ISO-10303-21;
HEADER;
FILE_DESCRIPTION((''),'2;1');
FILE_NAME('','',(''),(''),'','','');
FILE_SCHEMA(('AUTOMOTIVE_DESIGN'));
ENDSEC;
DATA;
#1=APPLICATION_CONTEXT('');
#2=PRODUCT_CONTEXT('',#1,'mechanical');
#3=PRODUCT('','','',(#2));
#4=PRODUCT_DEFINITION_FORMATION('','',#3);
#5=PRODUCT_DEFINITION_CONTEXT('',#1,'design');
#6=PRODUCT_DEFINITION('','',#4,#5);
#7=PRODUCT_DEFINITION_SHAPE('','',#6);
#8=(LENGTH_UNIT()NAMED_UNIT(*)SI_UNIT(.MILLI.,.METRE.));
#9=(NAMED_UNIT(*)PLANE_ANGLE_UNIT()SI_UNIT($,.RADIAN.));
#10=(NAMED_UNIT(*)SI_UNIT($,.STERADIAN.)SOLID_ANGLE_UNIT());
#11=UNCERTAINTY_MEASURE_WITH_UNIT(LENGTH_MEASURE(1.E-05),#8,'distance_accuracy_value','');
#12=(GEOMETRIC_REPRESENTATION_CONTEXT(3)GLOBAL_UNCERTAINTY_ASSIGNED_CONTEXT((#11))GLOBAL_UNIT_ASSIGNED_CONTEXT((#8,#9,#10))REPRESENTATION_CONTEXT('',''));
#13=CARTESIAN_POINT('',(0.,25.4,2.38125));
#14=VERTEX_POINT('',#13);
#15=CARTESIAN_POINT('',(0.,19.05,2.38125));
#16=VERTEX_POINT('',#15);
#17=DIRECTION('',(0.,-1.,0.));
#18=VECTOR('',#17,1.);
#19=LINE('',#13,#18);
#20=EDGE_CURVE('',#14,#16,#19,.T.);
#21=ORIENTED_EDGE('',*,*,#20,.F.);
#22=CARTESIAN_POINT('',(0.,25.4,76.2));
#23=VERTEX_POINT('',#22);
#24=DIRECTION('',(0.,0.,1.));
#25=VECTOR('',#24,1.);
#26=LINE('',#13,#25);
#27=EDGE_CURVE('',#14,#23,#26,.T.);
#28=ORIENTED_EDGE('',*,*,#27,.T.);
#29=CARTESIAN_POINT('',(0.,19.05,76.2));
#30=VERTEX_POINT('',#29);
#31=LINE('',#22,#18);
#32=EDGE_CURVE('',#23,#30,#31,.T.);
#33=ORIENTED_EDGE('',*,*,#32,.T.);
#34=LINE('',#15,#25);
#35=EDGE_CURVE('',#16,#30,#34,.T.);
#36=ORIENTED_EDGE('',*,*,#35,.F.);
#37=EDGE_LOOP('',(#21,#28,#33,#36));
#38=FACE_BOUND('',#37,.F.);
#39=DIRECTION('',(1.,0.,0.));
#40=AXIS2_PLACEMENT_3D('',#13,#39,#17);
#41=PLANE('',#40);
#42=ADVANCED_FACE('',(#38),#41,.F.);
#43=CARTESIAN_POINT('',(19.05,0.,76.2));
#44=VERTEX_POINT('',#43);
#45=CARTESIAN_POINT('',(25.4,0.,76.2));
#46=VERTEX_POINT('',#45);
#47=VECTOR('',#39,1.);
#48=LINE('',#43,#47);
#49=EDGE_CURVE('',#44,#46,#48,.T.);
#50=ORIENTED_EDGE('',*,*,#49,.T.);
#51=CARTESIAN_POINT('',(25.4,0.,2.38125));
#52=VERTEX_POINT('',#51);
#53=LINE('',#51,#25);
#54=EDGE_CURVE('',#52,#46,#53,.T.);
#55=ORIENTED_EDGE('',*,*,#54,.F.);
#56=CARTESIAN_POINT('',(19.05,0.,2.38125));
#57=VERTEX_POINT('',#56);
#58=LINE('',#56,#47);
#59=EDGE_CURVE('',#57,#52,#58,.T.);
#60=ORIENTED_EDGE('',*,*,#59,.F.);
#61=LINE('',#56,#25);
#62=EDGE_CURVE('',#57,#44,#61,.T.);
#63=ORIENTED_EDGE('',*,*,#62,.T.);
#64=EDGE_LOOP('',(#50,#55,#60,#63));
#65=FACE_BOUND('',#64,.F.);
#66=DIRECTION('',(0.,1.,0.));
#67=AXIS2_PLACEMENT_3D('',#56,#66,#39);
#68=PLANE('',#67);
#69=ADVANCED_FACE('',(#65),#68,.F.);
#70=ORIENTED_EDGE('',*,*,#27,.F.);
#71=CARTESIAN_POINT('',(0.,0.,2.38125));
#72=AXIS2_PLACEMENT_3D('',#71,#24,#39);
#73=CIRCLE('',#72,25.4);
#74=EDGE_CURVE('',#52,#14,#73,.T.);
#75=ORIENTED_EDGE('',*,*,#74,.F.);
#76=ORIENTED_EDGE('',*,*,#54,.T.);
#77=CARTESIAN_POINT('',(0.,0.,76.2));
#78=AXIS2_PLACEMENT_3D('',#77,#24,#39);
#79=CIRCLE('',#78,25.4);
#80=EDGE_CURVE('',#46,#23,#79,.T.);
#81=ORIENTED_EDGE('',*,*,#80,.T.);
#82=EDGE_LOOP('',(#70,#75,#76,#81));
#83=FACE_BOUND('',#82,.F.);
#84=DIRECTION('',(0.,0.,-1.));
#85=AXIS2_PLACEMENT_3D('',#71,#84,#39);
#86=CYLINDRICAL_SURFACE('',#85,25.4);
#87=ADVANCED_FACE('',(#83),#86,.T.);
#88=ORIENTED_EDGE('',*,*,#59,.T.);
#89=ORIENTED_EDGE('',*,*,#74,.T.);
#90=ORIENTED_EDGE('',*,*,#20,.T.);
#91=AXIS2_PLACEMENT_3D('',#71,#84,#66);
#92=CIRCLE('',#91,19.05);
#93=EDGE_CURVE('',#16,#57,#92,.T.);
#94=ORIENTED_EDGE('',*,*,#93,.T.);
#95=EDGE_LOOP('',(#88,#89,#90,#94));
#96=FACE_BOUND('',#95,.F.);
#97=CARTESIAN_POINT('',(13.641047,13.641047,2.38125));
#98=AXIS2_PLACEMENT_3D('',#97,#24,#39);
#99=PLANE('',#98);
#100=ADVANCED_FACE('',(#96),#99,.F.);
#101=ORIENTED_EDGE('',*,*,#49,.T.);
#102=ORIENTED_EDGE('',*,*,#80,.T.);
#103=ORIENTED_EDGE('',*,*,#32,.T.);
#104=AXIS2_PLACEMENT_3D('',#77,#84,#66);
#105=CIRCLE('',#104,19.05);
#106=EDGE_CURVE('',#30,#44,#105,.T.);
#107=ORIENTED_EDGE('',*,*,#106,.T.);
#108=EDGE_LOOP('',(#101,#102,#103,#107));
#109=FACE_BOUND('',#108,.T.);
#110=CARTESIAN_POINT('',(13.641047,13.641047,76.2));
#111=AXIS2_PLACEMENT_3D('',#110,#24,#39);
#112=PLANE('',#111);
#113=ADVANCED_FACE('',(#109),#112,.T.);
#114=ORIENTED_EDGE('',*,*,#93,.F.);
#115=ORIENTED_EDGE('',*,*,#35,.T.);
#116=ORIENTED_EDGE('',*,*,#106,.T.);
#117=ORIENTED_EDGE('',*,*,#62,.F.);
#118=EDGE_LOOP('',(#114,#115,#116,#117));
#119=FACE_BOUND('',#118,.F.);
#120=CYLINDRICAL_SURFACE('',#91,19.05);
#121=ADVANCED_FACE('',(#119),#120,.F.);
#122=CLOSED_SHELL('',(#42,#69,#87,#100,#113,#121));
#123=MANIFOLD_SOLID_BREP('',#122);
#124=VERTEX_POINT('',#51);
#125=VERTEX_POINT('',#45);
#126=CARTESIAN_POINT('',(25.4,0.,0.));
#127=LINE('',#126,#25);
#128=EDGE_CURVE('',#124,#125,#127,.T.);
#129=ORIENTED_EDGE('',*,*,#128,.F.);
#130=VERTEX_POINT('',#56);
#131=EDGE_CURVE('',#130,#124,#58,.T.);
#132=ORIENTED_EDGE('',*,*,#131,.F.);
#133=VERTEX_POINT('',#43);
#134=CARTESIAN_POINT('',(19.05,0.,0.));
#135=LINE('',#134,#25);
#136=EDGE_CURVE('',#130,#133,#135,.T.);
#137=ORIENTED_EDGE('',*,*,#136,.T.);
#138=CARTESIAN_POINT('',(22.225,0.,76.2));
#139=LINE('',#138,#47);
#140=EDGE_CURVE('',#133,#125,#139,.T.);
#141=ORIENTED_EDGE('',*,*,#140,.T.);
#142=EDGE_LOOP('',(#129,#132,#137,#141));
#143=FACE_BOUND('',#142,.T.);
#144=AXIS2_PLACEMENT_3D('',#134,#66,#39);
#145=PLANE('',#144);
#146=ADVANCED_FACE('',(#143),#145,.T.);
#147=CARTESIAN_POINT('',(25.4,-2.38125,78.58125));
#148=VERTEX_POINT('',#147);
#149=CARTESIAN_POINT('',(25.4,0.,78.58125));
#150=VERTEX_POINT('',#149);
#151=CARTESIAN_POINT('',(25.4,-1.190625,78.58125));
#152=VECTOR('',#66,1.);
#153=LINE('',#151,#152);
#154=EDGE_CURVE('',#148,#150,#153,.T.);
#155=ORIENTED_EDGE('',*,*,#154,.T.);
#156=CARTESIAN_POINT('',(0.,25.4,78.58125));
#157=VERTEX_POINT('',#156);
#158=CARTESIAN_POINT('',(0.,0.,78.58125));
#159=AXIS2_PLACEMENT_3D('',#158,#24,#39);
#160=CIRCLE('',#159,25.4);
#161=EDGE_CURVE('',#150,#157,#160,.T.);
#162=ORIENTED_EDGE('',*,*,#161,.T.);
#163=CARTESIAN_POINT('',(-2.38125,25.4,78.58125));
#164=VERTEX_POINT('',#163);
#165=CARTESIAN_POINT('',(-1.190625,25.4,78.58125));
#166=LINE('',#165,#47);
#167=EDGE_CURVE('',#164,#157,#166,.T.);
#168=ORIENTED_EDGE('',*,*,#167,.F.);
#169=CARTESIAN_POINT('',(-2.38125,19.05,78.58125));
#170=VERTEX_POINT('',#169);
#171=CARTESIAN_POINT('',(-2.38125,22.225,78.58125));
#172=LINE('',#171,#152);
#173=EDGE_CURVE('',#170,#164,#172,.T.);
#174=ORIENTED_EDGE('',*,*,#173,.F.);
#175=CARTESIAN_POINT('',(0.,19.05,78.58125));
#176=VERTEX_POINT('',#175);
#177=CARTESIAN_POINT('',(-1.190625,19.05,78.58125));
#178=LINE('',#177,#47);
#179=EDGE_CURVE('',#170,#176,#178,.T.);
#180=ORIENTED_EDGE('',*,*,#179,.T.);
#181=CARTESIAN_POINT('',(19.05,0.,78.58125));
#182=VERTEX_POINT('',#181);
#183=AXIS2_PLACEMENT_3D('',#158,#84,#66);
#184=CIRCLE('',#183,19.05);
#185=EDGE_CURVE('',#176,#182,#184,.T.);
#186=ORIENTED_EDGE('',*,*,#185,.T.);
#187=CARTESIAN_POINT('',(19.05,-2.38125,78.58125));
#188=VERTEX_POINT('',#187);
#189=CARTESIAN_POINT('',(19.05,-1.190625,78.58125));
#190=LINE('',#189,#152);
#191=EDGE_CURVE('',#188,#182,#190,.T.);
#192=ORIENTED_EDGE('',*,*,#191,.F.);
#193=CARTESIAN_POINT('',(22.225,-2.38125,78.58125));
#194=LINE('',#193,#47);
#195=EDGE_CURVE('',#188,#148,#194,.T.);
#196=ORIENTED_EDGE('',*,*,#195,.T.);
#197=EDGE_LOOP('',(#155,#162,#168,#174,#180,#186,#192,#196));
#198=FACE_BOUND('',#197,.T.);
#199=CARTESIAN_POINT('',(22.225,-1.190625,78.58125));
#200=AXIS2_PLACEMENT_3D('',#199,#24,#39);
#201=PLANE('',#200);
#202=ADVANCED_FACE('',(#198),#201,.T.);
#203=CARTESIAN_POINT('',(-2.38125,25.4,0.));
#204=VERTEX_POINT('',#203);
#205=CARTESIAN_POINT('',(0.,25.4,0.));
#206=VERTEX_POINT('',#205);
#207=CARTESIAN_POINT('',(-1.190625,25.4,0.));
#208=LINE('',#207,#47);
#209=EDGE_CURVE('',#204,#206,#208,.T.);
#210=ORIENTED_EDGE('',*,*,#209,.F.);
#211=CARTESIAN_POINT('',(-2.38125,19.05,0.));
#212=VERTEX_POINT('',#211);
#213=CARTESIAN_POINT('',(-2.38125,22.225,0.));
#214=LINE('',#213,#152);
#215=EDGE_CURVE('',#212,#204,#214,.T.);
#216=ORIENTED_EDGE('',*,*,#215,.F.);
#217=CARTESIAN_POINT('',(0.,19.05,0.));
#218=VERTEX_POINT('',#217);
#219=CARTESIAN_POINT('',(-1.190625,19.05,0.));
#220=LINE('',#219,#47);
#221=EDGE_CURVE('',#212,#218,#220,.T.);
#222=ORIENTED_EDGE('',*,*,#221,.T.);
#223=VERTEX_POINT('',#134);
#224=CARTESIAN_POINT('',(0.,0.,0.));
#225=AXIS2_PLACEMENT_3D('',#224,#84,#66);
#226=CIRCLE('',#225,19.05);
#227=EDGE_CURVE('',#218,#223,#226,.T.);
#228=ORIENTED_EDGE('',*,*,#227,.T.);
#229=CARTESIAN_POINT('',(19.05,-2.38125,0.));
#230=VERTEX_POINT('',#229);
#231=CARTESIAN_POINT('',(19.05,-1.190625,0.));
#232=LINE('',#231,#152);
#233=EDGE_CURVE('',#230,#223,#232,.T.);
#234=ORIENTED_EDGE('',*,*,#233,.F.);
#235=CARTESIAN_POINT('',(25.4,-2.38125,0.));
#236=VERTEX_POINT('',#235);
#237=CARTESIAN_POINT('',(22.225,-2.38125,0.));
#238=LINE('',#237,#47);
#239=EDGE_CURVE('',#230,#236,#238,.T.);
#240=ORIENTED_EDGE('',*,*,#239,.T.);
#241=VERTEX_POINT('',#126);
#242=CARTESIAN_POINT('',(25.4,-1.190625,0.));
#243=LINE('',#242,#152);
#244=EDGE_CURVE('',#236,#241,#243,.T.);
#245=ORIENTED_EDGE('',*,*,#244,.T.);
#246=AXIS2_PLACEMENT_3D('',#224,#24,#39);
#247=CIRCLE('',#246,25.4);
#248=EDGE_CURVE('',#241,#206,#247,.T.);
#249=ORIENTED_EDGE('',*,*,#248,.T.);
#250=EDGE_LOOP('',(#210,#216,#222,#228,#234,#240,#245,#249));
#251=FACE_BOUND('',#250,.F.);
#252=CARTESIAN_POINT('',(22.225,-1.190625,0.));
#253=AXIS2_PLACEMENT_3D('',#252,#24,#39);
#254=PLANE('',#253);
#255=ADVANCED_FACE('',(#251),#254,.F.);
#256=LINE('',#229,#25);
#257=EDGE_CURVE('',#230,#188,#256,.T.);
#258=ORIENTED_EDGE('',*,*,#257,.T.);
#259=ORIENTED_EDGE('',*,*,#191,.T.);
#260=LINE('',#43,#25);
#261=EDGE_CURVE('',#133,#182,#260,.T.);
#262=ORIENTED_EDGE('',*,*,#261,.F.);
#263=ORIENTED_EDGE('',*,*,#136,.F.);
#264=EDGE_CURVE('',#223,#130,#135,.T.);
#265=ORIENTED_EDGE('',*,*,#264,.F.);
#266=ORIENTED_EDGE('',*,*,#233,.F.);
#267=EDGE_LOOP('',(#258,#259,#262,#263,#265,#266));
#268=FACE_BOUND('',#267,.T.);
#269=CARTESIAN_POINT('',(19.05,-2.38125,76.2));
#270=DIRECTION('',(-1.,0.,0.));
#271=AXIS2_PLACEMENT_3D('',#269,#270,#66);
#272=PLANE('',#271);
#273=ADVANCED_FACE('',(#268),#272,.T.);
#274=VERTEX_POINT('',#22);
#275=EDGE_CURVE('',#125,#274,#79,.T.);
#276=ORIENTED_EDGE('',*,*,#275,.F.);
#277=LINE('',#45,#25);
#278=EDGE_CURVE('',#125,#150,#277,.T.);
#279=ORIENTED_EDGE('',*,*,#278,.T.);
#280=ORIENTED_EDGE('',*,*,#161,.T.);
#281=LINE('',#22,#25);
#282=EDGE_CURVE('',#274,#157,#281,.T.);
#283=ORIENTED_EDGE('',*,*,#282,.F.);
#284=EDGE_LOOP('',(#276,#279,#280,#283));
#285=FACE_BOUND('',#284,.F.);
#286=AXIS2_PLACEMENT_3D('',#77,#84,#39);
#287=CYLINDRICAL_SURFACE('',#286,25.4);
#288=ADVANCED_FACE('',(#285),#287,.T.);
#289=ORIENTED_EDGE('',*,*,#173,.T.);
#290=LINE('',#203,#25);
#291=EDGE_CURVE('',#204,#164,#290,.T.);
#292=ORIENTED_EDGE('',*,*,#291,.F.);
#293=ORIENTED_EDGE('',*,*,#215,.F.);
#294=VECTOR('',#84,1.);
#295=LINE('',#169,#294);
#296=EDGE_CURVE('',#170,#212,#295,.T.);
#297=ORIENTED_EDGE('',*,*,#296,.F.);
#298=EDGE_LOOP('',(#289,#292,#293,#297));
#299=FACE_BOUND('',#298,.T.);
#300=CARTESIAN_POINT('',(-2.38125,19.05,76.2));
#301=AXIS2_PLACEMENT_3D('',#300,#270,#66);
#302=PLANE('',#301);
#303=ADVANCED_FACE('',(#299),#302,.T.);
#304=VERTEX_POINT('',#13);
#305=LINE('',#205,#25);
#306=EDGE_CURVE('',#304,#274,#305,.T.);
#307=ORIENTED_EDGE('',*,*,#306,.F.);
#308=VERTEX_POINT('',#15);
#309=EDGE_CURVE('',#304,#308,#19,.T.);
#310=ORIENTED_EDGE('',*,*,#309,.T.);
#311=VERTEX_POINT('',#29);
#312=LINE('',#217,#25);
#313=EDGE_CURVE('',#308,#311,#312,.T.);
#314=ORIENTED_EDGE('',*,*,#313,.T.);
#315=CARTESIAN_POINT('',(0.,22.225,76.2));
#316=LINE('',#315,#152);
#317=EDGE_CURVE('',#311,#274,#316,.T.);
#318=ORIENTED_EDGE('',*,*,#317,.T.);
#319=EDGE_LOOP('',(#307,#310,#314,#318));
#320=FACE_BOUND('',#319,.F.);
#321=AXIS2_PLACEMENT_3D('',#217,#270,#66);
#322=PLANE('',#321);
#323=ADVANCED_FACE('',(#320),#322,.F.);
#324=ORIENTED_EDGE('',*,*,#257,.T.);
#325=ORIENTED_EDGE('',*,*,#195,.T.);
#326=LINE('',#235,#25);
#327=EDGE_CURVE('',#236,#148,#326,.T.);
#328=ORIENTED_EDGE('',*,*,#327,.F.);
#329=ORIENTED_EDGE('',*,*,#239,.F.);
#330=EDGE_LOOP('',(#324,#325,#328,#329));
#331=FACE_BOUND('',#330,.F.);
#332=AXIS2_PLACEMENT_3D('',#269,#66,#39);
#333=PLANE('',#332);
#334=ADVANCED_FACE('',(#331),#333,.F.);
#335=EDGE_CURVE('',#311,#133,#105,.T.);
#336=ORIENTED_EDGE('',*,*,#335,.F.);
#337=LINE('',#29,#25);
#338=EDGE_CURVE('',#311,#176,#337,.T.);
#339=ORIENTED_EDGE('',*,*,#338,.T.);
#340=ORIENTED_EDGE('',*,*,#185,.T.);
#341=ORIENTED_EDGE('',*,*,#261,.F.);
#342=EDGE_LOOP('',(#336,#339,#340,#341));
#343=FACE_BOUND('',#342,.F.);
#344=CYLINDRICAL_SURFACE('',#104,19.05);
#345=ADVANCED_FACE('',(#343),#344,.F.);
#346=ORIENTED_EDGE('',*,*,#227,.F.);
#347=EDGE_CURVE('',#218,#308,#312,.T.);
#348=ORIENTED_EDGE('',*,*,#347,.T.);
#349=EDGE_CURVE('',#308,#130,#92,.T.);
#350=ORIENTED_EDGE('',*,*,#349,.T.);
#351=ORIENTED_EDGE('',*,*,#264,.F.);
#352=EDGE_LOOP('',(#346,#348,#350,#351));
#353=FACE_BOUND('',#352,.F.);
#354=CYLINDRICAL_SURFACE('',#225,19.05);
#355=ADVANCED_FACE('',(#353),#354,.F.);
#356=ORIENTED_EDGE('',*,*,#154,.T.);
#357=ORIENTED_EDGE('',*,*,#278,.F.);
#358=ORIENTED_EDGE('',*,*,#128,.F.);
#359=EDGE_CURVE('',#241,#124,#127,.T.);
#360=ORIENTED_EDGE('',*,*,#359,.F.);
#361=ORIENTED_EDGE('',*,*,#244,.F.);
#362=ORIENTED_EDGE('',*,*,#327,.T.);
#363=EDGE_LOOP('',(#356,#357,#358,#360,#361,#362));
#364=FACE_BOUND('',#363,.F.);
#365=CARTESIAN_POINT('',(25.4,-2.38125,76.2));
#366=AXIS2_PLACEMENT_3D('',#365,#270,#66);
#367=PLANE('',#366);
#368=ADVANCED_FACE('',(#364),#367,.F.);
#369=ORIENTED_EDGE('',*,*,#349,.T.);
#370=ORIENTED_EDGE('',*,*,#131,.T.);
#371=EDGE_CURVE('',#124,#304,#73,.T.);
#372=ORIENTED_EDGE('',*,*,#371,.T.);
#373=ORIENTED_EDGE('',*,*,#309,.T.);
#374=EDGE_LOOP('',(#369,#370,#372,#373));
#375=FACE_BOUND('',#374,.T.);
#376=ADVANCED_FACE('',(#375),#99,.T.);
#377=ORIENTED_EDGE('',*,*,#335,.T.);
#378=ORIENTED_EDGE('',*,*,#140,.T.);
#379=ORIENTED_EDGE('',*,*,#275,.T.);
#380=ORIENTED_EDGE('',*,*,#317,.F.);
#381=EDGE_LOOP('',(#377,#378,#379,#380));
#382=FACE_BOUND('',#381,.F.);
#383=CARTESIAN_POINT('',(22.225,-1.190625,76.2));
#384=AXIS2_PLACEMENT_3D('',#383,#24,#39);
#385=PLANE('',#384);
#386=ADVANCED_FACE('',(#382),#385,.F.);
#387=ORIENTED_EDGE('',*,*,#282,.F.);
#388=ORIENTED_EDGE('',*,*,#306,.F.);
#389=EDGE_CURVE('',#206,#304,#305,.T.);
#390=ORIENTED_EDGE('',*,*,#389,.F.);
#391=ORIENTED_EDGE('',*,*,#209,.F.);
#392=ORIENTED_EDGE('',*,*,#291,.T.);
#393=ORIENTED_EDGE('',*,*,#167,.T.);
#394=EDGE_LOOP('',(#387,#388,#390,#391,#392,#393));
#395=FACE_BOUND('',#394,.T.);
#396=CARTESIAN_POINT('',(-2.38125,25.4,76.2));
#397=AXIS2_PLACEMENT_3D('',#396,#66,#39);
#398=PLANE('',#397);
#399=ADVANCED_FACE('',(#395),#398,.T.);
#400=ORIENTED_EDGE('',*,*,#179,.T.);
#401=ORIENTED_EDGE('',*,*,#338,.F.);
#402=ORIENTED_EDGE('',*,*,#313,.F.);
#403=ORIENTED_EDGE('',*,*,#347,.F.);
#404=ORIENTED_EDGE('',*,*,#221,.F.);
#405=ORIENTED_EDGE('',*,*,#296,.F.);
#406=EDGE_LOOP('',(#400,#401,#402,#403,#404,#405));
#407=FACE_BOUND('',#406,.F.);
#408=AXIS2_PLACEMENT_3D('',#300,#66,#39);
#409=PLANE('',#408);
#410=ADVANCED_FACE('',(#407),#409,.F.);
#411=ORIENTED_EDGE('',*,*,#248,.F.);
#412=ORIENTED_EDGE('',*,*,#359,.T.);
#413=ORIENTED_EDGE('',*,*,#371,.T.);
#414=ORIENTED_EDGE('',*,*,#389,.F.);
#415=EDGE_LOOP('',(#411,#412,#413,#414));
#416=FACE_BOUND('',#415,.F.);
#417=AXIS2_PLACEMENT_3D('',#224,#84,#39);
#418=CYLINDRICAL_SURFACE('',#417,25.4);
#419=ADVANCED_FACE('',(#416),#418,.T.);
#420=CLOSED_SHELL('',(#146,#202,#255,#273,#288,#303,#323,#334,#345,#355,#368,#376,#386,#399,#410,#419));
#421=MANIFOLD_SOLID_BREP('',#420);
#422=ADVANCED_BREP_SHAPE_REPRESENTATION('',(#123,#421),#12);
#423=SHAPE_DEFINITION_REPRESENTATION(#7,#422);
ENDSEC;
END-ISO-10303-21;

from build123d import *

# Parameters (mm, degrees)
F1_DEPTH = 2.38125
F0_W     = 6.35
F0_H     = 2.38125
F0_W_2   = 2.38125
F0_H_2   = 6.35
F2_DEPTH = 76.2
F3_W     = 6.35
F3_H     = 2.38125
F3_W_2   = 2.38125
F3_H_2   = 6.35
F4_DEPTH = 2.38125
F5_DEPTH = 73.81875


# Not quite as in the source:
# - a length typed as a fraction of an inch, garbled in the dataset ("3 / 203.2 mm" for 3/8 in), is restored
# - a feature names something its author has since deleted; it is built from what else it names


with BuildPart() as f1:
    # F0 (on Top) → F1 (new body)
    with BuildSketch(Plane.XY):
        with BuildLine():
            ThreePointArc((0, 19.05), (13.4703841816, 13.4703841816), (19.05, 0))
            Line((19.05, 0), (25.4, 0))
            ThreePointArc((25.4, 0), (17.9605122421, 17.9605122421), (0, 25.4))
            Line((0, 25.4), (0, 19.05))
        make_face()
    extrude(amount=F1_DEPTH)

    # F0 (on Top) → F2 (join)
    with BuildSketch(Plane.XY):
        with Locations((22.225, -1.190625)):
            Rectangle(F0_W, F0_H)
        with Locations((-1.190625, 22.225)):
            Rectangle(F0_W_2, F0_H_2)
    extrude(amount=F2_DEPTH)

    # F3 (on face) → F4 (join)
    with BuildSketch(Plane.XY.offset(76.2)):
        with Locations((22.225, -1.190625)):
            Rectangle(F3_W, F3_H)
        with BuildLine():
            ThreePointArc((0, 19.05), (13.4703841816, 13.4703841816), (19.05, 0))
            Line((19.05, 0), (25.4, 0))
            ThreePointArc((25.4, 0), (17.9605122421, 17.9605122421), (0, 25.4))
            Line((0, 25.4), (0, 19.05))
        make_face()
        with Locations((-1.190625, 22.225)):
            Rectangle(F3_W_2, F3_H_2)
    extrude(amount=F4_DEPTH)


with BuildPart() as f5:
    # F5 (new): a face of the model
    f5_faces = [f1.part.faces().sort_by_distance(p)[0] for p in [
        (14.2451252874, 14.2451252874, 2.38125),
    ]]
    extrude(f5_faces, amount=F5_DEPTH)


solid = Compound([f1.part, f5.part])
